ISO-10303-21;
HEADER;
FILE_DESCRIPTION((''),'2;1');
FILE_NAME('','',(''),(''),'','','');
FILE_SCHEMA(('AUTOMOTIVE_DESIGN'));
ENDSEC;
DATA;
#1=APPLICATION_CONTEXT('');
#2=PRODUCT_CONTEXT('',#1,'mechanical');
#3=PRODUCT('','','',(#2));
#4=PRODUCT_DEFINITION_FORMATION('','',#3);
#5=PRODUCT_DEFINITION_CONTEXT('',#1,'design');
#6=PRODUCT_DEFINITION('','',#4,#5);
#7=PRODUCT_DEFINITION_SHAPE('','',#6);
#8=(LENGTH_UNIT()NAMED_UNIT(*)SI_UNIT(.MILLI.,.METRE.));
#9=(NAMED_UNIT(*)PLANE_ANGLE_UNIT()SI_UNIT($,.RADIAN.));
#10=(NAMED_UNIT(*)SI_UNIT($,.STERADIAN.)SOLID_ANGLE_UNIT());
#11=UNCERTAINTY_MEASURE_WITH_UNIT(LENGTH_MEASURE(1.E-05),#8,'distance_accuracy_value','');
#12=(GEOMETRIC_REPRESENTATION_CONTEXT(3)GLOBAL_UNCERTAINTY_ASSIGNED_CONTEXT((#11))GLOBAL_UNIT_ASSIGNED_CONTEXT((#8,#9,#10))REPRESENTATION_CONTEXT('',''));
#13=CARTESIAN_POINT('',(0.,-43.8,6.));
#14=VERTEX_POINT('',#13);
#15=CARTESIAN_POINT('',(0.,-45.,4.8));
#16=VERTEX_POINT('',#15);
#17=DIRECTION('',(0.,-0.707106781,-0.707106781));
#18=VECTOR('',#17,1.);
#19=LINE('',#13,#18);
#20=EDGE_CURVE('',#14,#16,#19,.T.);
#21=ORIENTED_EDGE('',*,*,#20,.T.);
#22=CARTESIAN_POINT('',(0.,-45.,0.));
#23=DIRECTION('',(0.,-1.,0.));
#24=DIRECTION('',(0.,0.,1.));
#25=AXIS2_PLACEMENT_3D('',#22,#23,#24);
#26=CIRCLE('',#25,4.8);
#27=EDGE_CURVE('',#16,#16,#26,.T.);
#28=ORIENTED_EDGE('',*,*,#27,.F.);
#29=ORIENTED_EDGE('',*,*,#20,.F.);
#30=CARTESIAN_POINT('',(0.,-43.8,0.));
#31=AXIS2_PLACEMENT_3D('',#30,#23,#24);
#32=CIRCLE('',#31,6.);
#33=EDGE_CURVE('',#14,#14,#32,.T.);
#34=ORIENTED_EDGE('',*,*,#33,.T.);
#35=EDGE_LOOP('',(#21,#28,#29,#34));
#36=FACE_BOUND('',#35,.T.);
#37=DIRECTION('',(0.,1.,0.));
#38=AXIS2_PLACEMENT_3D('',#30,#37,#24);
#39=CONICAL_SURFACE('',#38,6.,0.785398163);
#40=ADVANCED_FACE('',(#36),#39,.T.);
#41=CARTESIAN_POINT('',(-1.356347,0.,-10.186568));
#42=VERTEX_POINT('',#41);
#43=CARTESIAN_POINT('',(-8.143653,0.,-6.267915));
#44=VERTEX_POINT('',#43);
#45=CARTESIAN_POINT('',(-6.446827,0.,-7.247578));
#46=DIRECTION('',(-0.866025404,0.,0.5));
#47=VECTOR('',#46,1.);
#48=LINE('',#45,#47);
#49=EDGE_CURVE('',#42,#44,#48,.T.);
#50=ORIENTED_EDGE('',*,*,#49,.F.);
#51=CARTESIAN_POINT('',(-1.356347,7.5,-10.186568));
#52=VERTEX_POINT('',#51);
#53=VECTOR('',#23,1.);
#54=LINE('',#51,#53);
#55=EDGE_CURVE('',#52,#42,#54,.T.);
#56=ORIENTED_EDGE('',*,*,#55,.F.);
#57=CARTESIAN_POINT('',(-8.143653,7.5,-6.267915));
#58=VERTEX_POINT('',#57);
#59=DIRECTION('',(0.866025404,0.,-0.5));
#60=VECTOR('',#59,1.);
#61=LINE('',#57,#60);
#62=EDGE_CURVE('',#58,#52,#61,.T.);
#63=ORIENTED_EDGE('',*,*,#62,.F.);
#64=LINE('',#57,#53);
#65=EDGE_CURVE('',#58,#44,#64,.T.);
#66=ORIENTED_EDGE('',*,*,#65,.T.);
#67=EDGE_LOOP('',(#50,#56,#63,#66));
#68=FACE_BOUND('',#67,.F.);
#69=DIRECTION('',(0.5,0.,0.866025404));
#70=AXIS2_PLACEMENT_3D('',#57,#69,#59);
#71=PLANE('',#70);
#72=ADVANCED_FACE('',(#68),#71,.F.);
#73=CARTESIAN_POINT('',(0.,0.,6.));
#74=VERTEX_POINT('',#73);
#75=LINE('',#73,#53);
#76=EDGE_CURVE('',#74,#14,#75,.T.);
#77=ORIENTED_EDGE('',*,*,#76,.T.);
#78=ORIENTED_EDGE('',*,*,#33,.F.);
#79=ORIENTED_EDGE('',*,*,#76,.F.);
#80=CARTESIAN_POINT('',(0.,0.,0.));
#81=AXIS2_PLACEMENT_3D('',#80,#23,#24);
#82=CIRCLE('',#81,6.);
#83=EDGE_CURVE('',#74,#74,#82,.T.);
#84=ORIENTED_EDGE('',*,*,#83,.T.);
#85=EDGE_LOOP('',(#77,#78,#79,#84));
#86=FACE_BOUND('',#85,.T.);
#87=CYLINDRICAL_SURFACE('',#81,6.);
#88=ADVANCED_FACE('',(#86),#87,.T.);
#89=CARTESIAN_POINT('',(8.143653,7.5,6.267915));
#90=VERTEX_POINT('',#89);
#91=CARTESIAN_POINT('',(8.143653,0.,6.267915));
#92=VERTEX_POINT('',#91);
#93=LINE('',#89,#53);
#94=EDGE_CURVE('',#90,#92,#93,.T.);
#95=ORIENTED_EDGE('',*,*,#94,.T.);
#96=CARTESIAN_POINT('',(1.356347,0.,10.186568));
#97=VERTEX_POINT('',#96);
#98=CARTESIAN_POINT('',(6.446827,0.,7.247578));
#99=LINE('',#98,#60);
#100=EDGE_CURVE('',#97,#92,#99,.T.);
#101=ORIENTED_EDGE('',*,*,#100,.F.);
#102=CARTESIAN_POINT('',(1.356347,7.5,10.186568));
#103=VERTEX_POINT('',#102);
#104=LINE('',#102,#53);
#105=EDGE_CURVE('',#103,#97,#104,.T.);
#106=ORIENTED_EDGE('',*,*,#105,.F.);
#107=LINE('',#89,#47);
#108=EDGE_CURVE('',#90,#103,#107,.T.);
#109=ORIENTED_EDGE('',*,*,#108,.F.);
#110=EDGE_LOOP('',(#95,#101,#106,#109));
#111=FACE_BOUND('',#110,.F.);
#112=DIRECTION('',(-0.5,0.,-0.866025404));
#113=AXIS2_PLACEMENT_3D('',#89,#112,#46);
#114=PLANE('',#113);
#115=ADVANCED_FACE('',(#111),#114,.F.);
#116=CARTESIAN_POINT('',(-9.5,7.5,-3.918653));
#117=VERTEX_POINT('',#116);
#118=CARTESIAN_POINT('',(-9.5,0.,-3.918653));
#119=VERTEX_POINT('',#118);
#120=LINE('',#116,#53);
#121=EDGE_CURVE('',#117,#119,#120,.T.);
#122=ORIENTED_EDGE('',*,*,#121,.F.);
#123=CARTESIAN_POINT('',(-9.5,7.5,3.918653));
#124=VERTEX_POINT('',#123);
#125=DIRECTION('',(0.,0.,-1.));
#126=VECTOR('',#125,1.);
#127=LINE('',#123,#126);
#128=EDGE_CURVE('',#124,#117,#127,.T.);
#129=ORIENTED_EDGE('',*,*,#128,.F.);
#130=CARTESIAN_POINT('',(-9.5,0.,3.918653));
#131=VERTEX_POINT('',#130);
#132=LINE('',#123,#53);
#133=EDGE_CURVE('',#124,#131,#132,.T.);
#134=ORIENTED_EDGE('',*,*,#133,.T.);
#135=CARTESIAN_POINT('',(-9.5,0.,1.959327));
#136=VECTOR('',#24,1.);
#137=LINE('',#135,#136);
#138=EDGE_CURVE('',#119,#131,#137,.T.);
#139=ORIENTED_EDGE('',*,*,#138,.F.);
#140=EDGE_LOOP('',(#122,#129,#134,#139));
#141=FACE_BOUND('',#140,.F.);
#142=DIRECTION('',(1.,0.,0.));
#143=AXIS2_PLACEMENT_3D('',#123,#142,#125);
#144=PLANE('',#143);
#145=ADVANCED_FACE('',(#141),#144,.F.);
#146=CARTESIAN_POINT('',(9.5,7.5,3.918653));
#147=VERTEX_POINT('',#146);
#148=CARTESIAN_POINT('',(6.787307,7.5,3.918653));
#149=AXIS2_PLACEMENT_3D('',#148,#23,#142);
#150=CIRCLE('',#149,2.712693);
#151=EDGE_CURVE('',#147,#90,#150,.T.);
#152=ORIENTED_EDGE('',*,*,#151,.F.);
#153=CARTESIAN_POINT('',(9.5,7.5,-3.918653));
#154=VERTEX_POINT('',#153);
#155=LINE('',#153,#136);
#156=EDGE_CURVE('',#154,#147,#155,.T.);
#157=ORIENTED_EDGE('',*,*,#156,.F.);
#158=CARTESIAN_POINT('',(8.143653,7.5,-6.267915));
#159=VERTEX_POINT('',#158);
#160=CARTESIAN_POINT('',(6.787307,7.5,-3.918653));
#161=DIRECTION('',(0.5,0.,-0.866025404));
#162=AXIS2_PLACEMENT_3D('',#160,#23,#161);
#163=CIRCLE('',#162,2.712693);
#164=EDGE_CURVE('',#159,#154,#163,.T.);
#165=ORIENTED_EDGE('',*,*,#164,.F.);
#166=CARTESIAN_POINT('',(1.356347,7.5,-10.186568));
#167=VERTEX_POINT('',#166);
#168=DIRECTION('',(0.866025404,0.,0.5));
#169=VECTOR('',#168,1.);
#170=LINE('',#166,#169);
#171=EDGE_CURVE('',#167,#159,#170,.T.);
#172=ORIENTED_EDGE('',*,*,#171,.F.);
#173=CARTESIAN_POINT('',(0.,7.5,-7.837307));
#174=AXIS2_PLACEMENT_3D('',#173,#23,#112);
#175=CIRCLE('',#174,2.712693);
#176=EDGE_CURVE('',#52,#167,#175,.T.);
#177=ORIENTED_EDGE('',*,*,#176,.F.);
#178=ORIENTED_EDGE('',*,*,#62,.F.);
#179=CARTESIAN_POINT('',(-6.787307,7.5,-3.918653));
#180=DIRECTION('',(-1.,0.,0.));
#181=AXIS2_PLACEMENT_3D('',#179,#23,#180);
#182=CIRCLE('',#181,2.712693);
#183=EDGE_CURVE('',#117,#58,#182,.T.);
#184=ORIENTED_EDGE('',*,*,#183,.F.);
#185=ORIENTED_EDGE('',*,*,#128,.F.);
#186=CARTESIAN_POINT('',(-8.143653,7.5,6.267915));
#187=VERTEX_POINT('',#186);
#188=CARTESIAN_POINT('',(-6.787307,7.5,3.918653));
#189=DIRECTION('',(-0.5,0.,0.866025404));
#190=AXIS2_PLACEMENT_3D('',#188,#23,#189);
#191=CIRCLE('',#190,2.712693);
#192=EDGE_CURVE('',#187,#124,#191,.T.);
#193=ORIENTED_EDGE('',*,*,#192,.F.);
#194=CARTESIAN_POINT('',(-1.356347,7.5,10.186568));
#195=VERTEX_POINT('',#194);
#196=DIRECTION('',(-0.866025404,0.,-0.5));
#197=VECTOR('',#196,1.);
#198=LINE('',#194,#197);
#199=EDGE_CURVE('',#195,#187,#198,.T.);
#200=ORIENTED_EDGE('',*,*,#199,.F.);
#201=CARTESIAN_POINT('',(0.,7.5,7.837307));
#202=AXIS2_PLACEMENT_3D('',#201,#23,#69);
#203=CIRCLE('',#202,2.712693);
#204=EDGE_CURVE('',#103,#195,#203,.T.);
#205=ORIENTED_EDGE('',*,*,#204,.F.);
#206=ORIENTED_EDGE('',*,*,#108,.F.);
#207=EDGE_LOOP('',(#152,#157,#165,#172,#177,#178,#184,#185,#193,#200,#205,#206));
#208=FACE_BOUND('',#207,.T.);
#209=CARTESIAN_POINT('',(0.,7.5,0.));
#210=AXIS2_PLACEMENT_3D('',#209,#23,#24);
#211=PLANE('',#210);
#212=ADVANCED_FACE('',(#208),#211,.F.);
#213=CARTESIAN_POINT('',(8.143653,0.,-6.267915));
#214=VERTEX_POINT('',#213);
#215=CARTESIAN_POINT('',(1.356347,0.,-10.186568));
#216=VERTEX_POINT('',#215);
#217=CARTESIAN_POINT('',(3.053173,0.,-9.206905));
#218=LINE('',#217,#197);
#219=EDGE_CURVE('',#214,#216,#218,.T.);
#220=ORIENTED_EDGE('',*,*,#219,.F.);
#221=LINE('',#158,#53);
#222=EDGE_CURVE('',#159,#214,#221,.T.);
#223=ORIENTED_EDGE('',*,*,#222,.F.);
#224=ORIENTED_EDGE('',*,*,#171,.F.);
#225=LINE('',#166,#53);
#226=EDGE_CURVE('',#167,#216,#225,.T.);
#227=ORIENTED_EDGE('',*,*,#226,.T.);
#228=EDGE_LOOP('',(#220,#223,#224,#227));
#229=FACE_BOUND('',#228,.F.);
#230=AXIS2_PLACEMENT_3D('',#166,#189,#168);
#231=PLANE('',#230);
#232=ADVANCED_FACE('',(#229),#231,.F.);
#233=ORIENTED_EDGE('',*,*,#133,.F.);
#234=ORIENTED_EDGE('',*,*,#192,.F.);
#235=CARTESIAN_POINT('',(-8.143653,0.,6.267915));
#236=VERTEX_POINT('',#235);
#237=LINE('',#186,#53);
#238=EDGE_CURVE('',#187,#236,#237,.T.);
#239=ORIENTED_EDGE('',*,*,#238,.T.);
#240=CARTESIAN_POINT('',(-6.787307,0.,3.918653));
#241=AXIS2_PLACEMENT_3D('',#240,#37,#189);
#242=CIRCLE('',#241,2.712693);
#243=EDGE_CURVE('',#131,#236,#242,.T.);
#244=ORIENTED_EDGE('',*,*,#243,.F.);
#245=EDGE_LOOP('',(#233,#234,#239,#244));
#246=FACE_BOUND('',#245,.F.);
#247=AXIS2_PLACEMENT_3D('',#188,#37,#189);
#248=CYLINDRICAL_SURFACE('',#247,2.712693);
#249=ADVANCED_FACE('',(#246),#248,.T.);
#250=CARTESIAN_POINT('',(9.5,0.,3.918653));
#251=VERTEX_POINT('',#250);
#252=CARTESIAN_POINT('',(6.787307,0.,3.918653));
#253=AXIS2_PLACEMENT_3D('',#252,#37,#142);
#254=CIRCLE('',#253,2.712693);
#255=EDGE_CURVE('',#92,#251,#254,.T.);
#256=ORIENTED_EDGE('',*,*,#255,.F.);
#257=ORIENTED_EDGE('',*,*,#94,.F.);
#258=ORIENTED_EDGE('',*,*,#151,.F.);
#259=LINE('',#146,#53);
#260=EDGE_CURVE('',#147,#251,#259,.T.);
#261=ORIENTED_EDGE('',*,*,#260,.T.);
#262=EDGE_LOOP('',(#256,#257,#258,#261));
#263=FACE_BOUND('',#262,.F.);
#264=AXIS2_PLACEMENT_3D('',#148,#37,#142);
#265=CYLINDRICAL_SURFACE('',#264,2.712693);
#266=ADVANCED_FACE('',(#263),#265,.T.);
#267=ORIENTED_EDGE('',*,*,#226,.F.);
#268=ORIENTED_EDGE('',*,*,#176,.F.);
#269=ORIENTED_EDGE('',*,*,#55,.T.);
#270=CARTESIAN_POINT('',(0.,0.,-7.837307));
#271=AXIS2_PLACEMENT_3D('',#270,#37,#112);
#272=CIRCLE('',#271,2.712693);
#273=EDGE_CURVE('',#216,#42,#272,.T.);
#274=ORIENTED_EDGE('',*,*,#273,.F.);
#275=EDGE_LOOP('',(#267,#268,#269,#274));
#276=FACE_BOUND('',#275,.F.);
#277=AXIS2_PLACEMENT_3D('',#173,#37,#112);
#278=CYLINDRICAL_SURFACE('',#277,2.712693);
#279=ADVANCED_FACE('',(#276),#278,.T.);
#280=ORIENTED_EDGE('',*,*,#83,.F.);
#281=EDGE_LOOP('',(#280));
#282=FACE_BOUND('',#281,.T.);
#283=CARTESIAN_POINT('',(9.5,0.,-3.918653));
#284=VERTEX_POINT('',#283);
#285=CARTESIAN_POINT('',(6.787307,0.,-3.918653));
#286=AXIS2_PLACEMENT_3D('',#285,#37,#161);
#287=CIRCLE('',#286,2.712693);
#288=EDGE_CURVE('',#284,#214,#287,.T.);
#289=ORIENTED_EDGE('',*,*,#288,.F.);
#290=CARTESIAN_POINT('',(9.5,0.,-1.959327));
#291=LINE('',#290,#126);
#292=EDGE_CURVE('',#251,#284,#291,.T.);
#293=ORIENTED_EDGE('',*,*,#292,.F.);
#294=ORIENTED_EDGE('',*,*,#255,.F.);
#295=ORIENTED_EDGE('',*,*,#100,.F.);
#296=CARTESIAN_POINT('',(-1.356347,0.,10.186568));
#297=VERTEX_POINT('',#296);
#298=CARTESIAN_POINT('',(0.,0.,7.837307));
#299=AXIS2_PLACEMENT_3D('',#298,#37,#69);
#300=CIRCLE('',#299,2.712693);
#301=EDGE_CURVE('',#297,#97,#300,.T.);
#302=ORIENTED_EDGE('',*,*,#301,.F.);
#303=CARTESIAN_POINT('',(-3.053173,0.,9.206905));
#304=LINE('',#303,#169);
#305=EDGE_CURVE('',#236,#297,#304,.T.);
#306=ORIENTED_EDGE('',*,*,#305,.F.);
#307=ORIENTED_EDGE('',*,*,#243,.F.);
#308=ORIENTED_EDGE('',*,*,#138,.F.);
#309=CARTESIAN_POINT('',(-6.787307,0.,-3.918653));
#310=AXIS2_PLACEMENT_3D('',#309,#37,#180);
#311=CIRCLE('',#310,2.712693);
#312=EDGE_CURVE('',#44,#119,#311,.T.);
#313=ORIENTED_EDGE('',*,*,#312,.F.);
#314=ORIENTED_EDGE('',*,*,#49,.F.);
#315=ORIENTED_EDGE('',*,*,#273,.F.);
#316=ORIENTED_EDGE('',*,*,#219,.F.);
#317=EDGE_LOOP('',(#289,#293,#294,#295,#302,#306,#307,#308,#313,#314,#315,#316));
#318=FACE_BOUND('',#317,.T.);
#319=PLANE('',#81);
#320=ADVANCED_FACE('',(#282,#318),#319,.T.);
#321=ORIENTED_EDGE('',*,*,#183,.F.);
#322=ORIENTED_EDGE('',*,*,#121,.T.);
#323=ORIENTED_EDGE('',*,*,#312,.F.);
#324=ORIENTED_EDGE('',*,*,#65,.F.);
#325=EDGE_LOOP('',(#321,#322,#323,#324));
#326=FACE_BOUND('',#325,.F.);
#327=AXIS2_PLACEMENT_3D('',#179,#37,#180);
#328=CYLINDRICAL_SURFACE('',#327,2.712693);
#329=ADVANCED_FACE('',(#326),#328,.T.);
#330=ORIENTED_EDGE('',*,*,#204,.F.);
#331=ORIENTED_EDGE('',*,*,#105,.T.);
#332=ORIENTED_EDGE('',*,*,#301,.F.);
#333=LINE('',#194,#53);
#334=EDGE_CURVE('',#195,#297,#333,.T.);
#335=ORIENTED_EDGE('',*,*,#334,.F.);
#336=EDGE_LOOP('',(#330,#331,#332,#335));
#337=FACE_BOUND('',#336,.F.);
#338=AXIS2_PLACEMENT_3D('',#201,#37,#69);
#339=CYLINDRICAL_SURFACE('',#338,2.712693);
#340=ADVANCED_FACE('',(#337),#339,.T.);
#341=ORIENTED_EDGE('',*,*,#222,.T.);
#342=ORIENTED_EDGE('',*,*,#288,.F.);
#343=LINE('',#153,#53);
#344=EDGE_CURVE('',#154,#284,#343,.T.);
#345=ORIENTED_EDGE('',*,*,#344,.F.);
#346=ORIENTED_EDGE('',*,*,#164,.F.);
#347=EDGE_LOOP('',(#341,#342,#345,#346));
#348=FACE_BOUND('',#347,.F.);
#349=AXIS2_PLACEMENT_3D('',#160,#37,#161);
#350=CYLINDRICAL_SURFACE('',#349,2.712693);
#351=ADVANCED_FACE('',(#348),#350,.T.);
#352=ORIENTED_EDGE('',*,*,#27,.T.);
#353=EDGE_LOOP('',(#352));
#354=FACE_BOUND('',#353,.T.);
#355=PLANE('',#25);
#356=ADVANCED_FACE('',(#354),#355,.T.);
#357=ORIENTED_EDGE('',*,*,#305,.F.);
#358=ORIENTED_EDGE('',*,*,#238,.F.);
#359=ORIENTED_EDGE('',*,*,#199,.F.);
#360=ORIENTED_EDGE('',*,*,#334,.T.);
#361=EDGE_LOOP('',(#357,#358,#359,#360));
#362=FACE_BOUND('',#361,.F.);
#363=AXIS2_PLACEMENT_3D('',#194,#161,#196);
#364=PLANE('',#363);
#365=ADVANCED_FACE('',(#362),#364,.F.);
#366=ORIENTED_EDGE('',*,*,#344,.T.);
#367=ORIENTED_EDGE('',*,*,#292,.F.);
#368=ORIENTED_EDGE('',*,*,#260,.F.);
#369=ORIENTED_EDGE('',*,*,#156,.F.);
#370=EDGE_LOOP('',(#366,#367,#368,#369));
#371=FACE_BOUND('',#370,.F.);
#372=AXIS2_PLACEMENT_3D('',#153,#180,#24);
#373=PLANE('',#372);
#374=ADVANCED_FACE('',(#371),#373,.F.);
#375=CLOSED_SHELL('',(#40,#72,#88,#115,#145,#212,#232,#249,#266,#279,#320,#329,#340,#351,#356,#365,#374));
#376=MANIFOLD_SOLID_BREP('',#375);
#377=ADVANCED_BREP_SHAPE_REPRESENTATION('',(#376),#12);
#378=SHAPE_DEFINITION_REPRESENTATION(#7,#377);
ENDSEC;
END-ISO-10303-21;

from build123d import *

# Parameters (mm, degrees)
F2_R     = 15.825
F3_DEPTH = 25


# Not quite as in the source:
# - a feature names something its author has since deleted; it is built from what else it names


with BuildPart() as f1:
    # F0 (on Right) → F1 (revolve)
    with BuildSketch(Plane.YZ):
        Polygon((0, 15.825), (0, 6), (-43.8, 6), (-45, 4.8), (-45, 0), (7.5, 0), (7.5, 15.825), align=None)
    revolve(axis=Axis((0, -18.75, 0), (0, -1, 0)))

    # F2 (on face) → F3 (cut)
    with BuildSketch(Plane(origin=(0, 7.5, 0), x_dir=(-1, 0, 0), z_dir=(0, 1, 0))):
        Circle(F2_R)
        with BuildLine():
            ThreePointArc((1.3563466521, -10.1865680099), (0, -10.55), (-1.3563466521, -10.1865680099))
            Line((-1.3563466521, -10.1865680099), (-8.1436533479, -6.267914662))
            ThreePointArc((-8.1436533479, -6.267914662), (-9.1365680099, -5.275), (-9.5, -3.9186533479))
            Line((-9.5, -3.9186533479), (-9.5, 3.9186533479))
            ThreePointArc((-9.5, 3.9186533479), (-9.1365680099, 5.275), (-8.1436533479, 6.267914662))
            Line((-8.1436533479, 6.267914662), (-1.3563466521, 10.1865680099))
            ThreePointArc((-1.3563466521, 10.1865680099), (0, 10.55), (1.3563466521, 10.1865680099))
            Line((1.3563466521, 10.1865680099), (8.1436533479, 6.267914662))
            ThreePointArc((8.1436533479, 6.267914662), (9.1365680099, 5.275), (9.5, 3.9186533479))
            Line((9.5, 3.9186533479), (9.5, -3.9186533479))
            ThreePointArc((9.5, -3.9186533479), (9.1365680099, -5.275), (8.1436533479, -6.267914662))
            Line((8.1436533479, -6.267914662), (1.3563466521, -10.1865680099))
        make_face(mode=Mode.SUBTRACT)
    extrude(amount=-F3_DEPTH, mode=Mode.SUBTRACT)


solid = f1.part
